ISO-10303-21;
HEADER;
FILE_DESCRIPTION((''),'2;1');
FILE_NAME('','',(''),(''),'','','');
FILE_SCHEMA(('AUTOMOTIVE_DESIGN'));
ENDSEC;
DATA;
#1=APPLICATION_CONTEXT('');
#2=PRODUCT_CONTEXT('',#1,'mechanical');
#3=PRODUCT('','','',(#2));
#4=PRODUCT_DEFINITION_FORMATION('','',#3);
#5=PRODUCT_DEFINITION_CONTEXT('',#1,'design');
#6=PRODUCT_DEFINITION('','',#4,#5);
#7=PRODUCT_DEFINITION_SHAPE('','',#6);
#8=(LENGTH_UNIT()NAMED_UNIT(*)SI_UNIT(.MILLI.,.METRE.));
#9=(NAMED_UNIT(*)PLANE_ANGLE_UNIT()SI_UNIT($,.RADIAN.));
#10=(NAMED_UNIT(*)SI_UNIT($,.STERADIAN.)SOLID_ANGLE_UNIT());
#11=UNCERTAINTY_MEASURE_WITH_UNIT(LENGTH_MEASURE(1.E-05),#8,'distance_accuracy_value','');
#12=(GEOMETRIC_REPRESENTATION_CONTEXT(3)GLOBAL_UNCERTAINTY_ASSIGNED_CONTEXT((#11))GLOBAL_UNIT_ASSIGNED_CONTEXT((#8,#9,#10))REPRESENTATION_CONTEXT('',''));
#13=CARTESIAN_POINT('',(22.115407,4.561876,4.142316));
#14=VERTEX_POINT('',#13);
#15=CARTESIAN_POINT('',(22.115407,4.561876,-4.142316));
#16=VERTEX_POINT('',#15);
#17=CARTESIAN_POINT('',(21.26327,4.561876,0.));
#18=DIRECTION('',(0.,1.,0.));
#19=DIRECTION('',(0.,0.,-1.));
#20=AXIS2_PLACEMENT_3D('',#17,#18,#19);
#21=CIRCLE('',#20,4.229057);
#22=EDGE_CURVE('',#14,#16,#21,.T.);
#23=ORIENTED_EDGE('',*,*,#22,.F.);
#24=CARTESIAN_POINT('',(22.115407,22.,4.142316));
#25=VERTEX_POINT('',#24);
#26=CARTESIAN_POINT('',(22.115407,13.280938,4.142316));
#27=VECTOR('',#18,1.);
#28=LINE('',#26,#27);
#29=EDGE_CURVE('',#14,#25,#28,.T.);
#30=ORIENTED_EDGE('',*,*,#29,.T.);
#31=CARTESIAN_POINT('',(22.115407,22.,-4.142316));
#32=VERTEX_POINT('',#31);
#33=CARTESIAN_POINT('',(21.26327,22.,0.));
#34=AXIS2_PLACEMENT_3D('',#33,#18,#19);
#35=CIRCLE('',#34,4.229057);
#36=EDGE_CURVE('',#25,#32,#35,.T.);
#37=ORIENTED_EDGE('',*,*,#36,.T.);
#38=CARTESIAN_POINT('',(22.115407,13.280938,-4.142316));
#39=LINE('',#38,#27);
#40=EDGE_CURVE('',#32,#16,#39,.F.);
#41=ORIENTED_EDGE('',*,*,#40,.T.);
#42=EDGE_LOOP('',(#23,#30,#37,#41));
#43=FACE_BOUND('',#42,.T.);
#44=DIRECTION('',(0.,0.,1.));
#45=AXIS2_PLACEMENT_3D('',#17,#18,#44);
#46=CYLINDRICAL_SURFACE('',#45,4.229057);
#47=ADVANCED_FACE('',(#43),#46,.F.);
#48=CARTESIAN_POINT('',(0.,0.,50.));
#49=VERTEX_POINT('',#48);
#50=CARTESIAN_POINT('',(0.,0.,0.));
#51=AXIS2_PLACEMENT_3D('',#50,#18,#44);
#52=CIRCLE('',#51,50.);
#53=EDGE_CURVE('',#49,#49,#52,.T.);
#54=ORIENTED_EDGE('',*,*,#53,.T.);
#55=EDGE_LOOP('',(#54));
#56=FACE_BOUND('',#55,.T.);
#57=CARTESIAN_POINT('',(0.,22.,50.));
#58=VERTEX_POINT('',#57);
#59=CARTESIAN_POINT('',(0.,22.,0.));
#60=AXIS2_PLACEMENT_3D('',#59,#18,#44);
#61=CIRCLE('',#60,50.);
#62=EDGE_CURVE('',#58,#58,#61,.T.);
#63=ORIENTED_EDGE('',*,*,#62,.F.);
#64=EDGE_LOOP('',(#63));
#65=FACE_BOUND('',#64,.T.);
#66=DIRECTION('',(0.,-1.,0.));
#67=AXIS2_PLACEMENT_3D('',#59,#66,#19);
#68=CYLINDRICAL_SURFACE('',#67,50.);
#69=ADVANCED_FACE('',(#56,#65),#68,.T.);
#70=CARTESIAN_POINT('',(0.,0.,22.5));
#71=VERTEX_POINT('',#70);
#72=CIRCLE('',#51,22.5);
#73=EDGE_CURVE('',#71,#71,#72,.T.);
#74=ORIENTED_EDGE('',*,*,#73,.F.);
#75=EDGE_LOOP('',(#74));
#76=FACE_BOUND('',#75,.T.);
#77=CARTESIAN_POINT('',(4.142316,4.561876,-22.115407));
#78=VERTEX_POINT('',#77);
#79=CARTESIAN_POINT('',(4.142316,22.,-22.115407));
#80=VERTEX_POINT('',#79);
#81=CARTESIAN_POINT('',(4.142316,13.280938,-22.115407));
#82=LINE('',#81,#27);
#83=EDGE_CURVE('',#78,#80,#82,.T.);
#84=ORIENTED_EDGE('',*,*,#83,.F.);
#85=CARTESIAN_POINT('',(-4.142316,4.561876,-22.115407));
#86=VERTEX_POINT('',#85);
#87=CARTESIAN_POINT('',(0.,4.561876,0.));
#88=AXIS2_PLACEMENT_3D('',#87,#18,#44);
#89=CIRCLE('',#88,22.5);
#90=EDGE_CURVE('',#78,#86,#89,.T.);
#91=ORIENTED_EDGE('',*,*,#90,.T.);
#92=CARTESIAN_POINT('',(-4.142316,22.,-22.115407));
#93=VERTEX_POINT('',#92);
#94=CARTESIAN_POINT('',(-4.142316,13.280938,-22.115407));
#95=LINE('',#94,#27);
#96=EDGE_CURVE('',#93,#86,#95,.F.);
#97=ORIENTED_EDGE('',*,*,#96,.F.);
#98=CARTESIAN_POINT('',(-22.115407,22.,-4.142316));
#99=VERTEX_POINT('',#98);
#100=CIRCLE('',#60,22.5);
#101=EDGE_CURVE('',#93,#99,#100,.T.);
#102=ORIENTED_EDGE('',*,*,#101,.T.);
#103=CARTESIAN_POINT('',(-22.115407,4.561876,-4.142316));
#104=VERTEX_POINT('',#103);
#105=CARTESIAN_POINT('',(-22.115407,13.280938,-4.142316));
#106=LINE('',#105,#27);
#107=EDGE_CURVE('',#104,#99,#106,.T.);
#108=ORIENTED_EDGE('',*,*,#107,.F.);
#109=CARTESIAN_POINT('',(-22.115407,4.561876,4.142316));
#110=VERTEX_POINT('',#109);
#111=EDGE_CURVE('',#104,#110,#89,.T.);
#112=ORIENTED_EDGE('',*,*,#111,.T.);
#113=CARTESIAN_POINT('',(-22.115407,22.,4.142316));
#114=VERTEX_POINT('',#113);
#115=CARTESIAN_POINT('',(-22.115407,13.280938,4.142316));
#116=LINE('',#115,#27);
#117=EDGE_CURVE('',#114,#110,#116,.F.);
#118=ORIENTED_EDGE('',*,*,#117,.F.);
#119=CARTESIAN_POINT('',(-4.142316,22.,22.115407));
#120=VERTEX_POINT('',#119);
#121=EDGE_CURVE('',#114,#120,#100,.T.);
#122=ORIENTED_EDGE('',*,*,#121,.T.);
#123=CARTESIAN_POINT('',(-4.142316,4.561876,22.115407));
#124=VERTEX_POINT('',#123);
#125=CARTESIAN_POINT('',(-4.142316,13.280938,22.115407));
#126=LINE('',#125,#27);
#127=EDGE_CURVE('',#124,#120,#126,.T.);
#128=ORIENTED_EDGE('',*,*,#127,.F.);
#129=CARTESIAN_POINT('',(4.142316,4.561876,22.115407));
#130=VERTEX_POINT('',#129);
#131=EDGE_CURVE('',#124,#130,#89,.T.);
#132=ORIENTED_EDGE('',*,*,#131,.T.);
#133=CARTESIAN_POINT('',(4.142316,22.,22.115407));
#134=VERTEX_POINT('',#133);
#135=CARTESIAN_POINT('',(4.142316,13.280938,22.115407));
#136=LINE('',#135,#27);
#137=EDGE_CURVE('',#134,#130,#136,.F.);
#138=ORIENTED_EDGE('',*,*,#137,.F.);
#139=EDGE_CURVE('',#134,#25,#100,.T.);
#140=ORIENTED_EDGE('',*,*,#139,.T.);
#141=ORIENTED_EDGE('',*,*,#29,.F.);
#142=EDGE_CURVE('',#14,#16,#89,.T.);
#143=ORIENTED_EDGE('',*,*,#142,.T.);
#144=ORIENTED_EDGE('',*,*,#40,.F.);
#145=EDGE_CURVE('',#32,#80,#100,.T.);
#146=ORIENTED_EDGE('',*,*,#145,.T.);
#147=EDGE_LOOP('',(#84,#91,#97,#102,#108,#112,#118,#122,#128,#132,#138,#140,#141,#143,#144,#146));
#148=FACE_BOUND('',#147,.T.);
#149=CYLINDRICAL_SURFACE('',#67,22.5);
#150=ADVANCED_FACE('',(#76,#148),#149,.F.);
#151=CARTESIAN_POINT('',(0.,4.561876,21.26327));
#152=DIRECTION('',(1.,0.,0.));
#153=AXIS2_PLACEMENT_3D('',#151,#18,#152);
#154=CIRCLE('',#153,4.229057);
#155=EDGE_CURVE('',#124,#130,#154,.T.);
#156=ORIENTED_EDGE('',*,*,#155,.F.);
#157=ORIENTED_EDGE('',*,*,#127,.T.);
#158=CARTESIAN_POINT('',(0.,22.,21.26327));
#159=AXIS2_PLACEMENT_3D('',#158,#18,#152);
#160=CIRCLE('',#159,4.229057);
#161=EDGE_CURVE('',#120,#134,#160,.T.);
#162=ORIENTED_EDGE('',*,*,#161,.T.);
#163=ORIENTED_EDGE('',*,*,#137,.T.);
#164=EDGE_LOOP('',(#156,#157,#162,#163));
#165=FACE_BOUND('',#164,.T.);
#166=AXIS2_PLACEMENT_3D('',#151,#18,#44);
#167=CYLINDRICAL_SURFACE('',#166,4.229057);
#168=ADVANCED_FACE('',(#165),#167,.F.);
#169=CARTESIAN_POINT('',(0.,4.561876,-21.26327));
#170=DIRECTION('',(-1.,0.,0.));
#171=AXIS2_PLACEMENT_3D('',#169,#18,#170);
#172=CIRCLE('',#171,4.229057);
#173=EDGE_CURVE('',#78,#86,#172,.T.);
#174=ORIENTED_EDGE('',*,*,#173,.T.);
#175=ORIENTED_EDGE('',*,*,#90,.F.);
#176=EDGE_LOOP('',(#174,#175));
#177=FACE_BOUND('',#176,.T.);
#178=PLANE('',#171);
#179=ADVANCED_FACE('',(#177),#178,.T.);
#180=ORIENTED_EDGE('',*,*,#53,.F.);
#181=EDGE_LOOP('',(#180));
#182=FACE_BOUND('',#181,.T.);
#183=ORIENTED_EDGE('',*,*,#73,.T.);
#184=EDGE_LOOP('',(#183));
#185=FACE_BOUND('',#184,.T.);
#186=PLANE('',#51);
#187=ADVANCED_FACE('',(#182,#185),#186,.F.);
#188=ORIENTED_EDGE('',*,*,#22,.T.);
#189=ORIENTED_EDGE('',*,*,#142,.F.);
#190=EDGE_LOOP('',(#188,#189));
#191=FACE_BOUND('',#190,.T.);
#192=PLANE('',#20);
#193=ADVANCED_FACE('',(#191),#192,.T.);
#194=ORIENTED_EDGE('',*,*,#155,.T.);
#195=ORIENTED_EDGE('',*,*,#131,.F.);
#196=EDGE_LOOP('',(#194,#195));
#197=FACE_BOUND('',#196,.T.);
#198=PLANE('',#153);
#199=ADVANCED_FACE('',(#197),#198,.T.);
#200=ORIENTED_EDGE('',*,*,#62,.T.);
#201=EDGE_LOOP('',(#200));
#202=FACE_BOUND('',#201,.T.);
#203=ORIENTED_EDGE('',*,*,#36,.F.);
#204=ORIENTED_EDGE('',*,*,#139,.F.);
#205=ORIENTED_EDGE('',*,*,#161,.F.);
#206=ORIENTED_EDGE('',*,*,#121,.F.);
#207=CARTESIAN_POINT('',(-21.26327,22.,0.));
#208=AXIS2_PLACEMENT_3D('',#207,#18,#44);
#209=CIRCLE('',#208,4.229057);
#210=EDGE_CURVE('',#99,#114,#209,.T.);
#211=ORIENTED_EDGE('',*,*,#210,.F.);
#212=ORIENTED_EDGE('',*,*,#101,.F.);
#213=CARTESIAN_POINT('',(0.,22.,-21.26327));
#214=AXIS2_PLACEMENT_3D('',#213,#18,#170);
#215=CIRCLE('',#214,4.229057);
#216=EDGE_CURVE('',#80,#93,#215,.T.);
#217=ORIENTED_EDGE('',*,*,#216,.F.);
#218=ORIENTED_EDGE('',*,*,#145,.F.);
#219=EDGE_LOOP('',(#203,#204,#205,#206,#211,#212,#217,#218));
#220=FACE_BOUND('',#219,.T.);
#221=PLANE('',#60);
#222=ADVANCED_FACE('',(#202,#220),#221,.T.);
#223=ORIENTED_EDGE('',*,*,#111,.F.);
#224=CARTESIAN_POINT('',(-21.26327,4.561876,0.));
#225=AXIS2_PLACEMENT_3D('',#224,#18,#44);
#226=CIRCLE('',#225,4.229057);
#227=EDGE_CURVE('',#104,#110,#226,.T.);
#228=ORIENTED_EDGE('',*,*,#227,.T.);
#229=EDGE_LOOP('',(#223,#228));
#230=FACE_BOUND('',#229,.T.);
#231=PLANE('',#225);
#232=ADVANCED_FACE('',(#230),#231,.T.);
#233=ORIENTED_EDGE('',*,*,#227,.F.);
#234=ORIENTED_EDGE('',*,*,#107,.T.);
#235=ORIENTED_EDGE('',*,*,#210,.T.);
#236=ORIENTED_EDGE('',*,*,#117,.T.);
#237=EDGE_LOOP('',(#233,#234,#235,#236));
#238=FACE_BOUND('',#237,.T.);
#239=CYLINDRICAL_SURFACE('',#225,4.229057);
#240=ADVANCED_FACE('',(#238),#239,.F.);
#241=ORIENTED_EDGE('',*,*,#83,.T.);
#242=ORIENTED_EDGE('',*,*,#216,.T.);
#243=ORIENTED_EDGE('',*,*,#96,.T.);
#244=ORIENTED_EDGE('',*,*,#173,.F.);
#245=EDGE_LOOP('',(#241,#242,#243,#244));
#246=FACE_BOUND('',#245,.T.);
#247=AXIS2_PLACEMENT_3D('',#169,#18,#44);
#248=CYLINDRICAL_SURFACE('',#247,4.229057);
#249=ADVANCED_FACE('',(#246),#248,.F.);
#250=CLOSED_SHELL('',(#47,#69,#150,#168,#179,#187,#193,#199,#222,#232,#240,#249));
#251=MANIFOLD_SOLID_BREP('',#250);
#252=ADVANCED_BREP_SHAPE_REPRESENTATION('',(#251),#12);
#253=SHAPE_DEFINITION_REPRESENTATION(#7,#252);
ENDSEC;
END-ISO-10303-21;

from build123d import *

# Parameters (mm, degrees)
SKETCH1_R           = 50
BOSS_EXTRUDE1_DEPTH = 22
SKETCH2_R           = 22.5
CUT_EXTRUDE1_DEPTH  = 75.054034326
SKETCH3_R           = 4.229056578
CUT_EXTRUDE2_DEPTH  = 17.438124461
CIRPATTERN1_COUNT   = 4


with BuildPart() as part:
    # Sketch1 → Boss-Extrude1 (new body)
    with BuildSketch(Plane(origin=(0, 0, 0), x_dir=(1, 0, 0), z_dir=(0, 1, 0))):
        Circle(SKETCH1_R)
    extrude(amount=BOSS_EXTRUDE1_DEPTH)

    # Sketch2 → Cut-Extrude1 (cut, through all)
    with BuildSketch(Plane(origin=(0, 0, 0), x_dir=(1, 0, 0), z_dir=(0, 1, 0))):
        Circle(SKETCH2_R)
    extrude(amount=CUT_EXTRUDE1_DEPTH, mode=Mode.SUBTRACT)

    # Sketch3 → Cut-Extrude2 (cut)
    with BuildSketch(Plane(origin=(0, 22, 0), x_dir=(1, 0, 0), z_dir=(0, 1, 0))):
        with Locations((-21.263269619, 0)):
            Circle(SKETCH3_R)
    cut_extrude2 = extrude(amount=-CUT_EXTRUDE2_DEPTH, mode=Mode.SUBTRACT)

    # CirPattern1: Cut-Extrude2 ×4 about axis
    cirpattern1_axis = Axis((0, 0, 0), (0, 1, 0))
    for i in range(1, CIRPATTERN1_COUNT):
        add(cut_extrude2.rotate(cirpattern1_axis, i * 360 / CIRPATTERN1_COUNT), mode=Mode.SUBTRACT)


solid = part.part
